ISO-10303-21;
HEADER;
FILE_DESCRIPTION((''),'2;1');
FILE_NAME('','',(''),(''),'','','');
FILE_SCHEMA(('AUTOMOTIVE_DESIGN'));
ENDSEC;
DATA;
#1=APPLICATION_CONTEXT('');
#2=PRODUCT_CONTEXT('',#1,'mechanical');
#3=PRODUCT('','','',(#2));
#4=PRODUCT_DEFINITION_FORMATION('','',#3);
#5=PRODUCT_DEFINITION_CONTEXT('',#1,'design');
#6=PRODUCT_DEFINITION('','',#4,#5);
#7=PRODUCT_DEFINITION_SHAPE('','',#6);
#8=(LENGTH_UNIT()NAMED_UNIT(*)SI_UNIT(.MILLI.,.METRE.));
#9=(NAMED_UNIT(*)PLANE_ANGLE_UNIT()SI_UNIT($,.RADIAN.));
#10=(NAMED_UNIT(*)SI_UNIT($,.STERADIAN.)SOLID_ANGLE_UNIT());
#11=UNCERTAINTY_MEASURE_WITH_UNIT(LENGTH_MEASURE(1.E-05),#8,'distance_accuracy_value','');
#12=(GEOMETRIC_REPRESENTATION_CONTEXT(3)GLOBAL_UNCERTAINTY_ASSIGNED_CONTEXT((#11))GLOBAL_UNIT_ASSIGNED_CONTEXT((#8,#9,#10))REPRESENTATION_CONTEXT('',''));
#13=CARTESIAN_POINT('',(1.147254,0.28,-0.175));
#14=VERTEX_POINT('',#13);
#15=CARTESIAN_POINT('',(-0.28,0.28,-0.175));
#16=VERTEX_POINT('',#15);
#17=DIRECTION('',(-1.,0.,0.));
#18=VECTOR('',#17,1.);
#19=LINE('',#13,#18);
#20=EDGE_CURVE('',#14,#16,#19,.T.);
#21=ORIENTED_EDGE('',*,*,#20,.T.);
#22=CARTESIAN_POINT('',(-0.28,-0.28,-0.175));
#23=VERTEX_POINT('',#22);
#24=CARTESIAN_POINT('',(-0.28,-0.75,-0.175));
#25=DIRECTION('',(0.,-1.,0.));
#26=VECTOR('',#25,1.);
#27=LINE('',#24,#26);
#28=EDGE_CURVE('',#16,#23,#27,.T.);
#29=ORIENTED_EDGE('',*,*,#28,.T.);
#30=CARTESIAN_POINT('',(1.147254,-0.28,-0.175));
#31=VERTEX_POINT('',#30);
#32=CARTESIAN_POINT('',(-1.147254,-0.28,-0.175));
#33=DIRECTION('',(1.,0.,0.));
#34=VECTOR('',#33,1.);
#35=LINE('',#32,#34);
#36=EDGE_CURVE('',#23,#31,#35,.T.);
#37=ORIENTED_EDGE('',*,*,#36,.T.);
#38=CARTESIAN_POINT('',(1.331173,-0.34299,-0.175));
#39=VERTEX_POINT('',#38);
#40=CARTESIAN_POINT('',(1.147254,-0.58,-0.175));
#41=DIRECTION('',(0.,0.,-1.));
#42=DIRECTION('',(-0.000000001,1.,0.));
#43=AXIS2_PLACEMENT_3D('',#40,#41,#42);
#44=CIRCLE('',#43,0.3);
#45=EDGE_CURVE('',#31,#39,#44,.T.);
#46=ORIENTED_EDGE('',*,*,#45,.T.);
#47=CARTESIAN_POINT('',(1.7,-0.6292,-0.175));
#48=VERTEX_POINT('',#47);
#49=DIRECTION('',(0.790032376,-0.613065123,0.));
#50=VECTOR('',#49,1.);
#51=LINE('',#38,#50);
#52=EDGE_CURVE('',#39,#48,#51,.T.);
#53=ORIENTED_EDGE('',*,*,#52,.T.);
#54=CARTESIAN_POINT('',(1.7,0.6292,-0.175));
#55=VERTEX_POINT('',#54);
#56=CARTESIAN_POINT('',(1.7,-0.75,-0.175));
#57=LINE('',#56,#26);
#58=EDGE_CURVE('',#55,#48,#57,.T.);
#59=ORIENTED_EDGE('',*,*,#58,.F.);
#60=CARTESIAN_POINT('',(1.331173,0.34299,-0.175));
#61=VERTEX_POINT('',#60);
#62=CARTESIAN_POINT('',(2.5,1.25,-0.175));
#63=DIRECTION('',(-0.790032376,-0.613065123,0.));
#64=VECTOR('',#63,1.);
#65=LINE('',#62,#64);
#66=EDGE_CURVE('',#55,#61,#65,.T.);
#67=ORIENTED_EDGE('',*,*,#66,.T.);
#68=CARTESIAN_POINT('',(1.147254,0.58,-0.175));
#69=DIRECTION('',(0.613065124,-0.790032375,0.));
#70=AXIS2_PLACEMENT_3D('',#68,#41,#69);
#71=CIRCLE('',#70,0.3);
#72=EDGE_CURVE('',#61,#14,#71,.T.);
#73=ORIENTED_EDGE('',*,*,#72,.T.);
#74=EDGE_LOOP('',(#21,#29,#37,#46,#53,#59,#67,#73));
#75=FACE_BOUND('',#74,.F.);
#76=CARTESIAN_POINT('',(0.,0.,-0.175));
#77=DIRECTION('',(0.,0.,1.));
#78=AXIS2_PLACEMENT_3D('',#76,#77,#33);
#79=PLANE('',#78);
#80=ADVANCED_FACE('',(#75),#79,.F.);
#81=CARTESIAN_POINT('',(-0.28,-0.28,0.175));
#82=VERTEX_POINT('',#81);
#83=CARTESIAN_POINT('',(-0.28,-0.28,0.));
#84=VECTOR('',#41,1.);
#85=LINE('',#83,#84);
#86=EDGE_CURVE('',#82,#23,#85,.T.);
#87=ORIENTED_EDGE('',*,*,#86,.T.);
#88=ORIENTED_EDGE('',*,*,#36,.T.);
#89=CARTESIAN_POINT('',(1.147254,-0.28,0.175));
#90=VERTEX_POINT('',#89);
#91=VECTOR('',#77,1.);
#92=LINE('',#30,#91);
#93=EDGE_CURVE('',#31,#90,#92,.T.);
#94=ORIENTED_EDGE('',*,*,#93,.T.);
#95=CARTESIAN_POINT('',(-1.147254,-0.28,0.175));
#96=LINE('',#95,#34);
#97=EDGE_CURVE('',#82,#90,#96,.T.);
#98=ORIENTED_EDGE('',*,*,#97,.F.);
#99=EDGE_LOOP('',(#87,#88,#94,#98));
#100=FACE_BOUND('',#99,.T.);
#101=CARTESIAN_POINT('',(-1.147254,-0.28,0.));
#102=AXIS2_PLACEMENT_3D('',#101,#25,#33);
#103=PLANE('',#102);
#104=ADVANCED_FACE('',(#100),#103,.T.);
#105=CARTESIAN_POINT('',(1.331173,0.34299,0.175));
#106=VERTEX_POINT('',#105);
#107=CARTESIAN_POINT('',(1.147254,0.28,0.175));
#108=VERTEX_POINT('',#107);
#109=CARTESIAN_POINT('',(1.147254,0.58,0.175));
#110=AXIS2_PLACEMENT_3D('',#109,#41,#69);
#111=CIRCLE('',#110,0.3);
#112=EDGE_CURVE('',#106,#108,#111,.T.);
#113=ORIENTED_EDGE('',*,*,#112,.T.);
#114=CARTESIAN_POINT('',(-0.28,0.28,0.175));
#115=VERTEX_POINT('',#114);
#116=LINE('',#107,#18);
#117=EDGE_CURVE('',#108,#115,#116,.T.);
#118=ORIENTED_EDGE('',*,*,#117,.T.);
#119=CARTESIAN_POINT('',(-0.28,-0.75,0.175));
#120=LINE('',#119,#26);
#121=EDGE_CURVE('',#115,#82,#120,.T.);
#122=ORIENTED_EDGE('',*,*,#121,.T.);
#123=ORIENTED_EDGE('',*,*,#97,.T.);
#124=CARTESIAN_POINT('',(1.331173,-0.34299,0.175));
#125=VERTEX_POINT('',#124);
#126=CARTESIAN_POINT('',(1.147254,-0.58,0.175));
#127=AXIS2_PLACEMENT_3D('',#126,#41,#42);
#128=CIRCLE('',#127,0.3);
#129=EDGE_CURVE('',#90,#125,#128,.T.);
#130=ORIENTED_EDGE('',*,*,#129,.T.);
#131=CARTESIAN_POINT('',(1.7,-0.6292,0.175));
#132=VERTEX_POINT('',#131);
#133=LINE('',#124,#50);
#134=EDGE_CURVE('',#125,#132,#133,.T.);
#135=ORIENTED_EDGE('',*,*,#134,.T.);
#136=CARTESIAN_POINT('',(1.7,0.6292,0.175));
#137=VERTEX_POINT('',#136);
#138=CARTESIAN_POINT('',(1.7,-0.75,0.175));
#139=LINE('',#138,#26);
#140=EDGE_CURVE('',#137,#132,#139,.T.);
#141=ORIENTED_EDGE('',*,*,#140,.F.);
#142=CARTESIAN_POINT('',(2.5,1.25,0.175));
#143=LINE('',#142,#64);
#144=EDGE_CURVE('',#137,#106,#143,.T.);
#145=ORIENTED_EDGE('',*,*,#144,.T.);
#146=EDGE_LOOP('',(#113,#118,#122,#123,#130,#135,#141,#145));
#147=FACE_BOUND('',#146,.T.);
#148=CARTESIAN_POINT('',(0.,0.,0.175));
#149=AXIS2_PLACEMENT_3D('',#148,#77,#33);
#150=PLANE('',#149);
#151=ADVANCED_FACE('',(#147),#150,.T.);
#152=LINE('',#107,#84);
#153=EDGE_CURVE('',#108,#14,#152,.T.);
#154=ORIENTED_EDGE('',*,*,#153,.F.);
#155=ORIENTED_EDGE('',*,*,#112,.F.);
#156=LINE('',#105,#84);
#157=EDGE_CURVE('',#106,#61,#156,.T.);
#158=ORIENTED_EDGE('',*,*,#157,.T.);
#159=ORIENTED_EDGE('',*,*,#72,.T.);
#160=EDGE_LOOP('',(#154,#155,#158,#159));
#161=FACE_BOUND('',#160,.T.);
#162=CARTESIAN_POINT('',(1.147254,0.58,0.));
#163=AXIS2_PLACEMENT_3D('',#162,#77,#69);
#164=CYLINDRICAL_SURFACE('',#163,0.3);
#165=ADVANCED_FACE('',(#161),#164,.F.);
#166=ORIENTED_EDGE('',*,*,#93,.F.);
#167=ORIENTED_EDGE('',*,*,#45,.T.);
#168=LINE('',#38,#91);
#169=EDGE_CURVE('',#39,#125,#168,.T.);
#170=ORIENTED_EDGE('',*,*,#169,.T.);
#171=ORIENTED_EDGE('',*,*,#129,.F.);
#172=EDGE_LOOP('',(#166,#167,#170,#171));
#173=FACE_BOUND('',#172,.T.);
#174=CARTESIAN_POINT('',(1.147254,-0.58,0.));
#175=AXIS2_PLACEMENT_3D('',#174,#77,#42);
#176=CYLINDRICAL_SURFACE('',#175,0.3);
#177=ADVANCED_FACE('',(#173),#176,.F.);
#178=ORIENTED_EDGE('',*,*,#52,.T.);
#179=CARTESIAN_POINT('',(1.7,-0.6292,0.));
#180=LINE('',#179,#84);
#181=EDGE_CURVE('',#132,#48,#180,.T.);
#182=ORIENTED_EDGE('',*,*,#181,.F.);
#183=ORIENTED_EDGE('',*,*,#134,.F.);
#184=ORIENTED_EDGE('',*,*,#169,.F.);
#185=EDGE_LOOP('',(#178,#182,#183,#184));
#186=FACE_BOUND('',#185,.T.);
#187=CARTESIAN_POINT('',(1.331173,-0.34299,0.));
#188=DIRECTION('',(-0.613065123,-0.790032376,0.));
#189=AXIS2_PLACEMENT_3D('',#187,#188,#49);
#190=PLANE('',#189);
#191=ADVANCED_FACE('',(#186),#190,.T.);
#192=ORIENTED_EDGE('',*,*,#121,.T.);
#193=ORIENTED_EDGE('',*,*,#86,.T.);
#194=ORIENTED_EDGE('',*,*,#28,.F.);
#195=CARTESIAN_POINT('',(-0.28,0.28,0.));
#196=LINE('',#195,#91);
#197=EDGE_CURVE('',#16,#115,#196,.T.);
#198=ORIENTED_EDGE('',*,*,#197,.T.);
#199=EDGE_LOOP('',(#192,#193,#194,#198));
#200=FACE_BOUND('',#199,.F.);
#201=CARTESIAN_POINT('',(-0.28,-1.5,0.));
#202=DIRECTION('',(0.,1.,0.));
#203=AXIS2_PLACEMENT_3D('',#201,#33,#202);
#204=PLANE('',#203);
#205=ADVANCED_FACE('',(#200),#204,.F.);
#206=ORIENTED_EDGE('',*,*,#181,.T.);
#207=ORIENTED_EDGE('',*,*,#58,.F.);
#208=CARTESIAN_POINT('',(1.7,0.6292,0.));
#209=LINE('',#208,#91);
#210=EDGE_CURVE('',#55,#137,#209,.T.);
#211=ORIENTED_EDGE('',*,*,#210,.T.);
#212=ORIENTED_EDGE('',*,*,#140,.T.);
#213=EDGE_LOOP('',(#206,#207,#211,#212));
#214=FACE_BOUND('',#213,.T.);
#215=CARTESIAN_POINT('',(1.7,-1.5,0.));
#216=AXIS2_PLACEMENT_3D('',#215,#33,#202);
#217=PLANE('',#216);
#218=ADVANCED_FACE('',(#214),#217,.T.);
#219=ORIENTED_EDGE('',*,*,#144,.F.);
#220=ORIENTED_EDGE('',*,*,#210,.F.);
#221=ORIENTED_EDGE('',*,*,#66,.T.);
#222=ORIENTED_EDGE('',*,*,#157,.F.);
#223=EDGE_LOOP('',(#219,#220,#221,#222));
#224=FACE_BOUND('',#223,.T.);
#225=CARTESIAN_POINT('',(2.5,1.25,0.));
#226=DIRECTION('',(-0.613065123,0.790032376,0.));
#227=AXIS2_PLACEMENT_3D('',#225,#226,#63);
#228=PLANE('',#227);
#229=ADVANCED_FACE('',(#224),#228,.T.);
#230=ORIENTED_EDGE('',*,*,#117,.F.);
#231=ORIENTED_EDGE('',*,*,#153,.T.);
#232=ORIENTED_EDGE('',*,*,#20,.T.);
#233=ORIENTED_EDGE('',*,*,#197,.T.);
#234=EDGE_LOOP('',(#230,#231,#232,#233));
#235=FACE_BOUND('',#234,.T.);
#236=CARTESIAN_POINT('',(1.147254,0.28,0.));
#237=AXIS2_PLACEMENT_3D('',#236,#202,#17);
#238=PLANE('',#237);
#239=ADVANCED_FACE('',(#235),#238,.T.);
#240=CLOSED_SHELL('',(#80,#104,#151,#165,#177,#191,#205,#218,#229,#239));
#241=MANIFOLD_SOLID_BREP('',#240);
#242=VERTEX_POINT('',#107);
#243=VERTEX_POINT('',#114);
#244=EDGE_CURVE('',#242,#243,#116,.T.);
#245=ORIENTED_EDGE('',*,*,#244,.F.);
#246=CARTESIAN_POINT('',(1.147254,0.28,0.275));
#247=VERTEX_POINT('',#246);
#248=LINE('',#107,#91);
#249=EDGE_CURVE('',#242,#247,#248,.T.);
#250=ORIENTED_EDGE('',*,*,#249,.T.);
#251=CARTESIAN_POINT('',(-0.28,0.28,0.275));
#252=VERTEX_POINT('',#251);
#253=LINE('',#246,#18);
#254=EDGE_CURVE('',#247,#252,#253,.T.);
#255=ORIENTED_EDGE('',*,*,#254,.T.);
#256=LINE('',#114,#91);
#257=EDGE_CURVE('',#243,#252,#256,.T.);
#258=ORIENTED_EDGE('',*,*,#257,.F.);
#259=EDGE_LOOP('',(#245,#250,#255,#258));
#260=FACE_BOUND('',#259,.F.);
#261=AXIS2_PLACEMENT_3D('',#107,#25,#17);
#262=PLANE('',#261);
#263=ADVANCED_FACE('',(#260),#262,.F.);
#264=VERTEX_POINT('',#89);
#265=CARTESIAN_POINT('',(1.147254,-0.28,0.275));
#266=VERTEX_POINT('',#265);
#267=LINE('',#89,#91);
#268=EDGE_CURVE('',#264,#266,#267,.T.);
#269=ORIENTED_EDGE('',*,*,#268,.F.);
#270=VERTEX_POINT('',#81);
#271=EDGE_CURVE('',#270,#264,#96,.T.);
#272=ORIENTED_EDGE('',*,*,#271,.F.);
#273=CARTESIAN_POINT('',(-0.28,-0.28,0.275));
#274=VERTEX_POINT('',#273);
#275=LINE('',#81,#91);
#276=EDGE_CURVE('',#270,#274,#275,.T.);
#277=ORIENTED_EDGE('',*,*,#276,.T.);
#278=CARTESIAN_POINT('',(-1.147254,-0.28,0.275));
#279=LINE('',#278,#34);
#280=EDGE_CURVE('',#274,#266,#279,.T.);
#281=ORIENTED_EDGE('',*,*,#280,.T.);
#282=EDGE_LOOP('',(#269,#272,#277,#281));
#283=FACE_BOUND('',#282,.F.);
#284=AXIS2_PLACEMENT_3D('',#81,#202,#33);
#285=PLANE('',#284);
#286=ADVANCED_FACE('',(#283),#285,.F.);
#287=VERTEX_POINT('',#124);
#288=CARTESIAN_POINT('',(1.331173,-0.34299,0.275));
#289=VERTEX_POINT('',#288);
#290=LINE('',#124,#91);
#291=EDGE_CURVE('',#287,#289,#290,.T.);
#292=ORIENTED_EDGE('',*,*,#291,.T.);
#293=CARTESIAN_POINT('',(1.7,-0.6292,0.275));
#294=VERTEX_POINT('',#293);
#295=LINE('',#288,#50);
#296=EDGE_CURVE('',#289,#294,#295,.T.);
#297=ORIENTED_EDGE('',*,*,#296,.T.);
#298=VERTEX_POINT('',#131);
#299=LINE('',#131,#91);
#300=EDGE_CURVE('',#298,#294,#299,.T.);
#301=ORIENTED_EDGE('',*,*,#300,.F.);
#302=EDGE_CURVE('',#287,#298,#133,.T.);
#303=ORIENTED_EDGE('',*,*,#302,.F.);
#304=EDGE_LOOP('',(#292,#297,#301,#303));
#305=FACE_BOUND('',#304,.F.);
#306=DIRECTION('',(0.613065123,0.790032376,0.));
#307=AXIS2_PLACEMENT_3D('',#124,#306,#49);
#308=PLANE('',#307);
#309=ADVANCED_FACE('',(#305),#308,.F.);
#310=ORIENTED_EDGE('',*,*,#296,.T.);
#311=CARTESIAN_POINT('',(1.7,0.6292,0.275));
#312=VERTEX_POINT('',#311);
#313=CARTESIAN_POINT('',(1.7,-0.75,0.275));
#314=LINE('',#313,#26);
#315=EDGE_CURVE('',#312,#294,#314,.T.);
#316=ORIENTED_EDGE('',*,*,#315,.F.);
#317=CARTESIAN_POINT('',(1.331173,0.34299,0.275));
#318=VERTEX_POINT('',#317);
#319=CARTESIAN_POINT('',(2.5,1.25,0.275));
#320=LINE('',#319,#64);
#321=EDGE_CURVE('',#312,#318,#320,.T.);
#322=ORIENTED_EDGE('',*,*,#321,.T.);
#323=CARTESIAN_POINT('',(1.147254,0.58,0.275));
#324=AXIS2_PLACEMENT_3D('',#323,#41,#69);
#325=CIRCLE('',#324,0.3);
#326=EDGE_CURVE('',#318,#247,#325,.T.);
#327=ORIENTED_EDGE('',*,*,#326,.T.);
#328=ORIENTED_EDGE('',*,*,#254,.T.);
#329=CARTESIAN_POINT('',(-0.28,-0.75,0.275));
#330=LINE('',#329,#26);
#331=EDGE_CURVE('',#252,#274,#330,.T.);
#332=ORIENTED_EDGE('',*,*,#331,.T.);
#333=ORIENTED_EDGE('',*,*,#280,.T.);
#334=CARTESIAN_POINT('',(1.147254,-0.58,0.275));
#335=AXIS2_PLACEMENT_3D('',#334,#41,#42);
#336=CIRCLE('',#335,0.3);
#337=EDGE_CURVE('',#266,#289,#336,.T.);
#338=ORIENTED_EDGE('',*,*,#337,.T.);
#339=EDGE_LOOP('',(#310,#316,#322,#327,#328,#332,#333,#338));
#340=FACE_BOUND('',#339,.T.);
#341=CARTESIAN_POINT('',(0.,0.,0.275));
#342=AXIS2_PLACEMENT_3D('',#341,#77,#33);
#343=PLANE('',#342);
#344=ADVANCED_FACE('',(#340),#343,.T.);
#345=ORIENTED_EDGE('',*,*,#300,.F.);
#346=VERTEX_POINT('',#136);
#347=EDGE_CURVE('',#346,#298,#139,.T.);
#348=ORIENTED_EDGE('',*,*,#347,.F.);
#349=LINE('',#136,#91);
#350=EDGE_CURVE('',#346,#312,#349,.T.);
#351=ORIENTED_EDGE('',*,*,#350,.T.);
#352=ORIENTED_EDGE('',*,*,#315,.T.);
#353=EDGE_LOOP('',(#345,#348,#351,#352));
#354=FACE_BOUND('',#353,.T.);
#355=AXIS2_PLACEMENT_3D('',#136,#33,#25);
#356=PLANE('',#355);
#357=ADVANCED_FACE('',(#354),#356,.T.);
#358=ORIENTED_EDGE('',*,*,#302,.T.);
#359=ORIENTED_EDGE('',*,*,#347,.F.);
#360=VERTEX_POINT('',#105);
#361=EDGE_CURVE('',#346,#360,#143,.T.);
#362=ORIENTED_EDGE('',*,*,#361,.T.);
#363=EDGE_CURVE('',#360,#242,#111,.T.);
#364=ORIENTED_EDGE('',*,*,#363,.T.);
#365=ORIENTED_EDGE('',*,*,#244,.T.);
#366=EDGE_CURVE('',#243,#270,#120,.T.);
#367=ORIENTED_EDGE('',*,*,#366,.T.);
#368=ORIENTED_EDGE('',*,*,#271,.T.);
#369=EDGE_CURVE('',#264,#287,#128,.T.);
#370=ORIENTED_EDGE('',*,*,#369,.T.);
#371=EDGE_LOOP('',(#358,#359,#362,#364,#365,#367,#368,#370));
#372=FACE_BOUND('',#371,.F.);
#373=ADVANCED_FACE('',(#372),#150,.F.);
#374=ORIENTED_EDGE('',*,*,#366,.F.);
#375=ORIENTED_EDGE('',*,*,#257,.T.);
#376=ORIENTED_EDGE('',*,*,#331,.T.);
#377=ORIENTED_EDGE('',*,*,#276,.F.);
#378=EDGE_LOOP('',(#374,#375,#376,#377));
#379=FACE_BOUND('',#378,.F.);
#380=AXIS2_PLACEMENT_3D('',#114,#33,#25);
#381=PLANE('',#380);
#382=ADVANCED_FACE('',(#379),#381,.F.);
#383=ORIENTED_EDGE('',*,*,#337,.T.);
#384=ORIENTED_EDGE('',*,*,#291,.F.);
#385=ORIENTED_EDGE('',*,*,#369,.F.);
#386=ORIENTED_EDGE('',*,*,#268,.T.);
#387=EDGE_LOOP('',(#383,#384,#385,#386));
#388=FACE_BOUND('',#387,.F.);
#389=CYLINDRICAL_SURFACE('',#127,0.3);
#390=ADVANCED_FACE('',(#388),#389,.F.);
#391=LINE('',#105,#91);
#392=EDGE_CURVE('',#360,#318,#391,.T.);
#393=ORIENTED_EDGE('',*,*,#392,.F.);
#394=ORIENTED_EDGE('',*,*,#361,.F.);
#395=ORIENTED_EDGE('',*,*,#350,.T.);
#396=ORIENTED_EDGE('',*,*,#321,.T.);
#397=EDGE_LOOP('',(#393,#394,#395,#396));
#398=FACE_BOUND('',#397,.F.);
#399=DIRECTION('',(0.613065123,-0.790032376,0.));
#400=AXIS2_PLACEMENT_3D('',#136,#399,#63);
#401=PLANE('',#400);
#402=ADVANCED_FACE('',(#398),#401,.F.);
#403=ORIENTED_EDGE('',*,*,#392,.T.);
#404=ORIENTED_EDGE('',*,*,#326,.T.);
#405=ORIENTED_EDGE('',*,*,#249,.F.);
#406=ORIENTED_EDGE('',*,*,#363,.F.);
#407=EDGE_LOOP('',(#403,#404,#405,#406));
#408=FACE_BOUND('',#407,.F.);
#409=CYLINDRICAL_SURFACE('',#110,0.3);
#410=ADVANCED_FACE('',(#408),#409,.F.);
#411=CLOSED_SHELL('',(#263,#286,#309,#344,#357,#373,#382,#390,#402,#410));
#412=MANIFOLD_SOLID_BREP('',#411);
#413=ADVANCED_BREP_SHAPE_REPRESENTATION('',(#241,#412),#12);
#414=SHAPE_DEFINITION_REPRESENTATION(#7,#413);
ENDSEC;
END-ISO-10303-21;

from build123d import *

# Parameters (mm, degrees)
F0_R     = 0.5
F1_DEPTH = 0.175
F2_R     = 0.3
F3_W     = 1.98
F3_H     = 3
F4_DEPTH = 0.5
F6_DEPTH = 0.1


# Not quite as in the source:
# - a feature of the source that left no trace in its solid (it failed there, or was rolled back) is left out


with BuildPart() as f1:
    # F0 (on Top) → F1 (new body, symmetric)
    with BuildSketch(Plane.XY):
        with BuildLine():
            Line((-7, 1.25), (-7, 0))
            Line((-7, 0), (-7, -1.25))
            Line((-7, -1.25), (-2.5, -1.25))
            Line((-2.5, -1.25), (-1.3311730507, -0.3429902873))
            ThreePointArc((-1.3311730507, -0.3429902873), (-1.2444571304, -0.2961841144), (-1.1472535137, -0.28))
            Line((-1.1472535137, -0.28), (0, -0.28))
            Line((0, -0.28), (1.1472535137, -0.28))
            ThreePointArc((1.1472535137, -0.28), (1.2444571304, -0.2961841144), (1.3311730507, -0.3429902873))
            Line((1.3311730507, -0.3429902873), (2.5, -1.25))
            Line((2.5, -1.25), (7, -1.25))
            Line((7, -1.25), (7, 0))
            Line((7, 0), (7, 1.25))
            Line((7, 1.25), (2.5, 1.25))
            Line((2.5, 1.25), (1.3311730507, 0.3429902873))
            ThreePointArc((1.3311730507, 0.3429902873), (1.2444571304, 0.2961841144), (1.1472535137, 0.28))
            Line((1.1472535137, 0.28), (0, 0.28))
            Line((0, 0.28), (-1.1472535137, 0.28))
            ThreePointArc((-1.1472535137, 0.28), (-1.2444571304, 0.2961841144), (-1.3311730507, 0.3429902873))
            Line((-1.3311730507, 0.3429902873), (-2.5, 1.25))
            Line((-2.5, 1.25), (-7, 1.25))
        make_face()
        with Locations((-5, 0)):
            Circle(F0_R, mode=Mode.SUBTRACT)
        with Locations((5, 0)):
            Circle(F0_R, mode=Mode.SUBTRACT)
    extrude(amount=F1_DEPTH, both=True)

    # F2
    f2_edges = [f1.edges().sort_by_distance(p)[0] for p in [
        (-2.5, -1.25, 0),
        (2.5, -1.25, 0),
        (-2.5, 1.25, 0),
        (2.5, 1.25, 0),
    ]]
    fillet(f2_edges, radius=F2_R)


with BuildPart() as f4:
    # F3 (on Top) → F4 (new body, symmetric)
    with BuildSketch(Plane.XY):
        with Locations((0.71, 0)):
            Rectangle(F3_W, F3_H)
    extrude(amount=F4_DEPTH, both=True)

    # F5: intersect F1
    add(f1.part, mode=Mode.INTERSECT)


with BuildPart() as f6:
    # F6 (new): a face of the model
    f6_faces = [f4.part.faces().sort_by_distance(p)[0] for p in [
        (0.8150350005, 0, 0.175),
    ]]
    extrude(f6_faces, amount=F6_DEPTH)


solid = Compound([f4.part, f6.part])
